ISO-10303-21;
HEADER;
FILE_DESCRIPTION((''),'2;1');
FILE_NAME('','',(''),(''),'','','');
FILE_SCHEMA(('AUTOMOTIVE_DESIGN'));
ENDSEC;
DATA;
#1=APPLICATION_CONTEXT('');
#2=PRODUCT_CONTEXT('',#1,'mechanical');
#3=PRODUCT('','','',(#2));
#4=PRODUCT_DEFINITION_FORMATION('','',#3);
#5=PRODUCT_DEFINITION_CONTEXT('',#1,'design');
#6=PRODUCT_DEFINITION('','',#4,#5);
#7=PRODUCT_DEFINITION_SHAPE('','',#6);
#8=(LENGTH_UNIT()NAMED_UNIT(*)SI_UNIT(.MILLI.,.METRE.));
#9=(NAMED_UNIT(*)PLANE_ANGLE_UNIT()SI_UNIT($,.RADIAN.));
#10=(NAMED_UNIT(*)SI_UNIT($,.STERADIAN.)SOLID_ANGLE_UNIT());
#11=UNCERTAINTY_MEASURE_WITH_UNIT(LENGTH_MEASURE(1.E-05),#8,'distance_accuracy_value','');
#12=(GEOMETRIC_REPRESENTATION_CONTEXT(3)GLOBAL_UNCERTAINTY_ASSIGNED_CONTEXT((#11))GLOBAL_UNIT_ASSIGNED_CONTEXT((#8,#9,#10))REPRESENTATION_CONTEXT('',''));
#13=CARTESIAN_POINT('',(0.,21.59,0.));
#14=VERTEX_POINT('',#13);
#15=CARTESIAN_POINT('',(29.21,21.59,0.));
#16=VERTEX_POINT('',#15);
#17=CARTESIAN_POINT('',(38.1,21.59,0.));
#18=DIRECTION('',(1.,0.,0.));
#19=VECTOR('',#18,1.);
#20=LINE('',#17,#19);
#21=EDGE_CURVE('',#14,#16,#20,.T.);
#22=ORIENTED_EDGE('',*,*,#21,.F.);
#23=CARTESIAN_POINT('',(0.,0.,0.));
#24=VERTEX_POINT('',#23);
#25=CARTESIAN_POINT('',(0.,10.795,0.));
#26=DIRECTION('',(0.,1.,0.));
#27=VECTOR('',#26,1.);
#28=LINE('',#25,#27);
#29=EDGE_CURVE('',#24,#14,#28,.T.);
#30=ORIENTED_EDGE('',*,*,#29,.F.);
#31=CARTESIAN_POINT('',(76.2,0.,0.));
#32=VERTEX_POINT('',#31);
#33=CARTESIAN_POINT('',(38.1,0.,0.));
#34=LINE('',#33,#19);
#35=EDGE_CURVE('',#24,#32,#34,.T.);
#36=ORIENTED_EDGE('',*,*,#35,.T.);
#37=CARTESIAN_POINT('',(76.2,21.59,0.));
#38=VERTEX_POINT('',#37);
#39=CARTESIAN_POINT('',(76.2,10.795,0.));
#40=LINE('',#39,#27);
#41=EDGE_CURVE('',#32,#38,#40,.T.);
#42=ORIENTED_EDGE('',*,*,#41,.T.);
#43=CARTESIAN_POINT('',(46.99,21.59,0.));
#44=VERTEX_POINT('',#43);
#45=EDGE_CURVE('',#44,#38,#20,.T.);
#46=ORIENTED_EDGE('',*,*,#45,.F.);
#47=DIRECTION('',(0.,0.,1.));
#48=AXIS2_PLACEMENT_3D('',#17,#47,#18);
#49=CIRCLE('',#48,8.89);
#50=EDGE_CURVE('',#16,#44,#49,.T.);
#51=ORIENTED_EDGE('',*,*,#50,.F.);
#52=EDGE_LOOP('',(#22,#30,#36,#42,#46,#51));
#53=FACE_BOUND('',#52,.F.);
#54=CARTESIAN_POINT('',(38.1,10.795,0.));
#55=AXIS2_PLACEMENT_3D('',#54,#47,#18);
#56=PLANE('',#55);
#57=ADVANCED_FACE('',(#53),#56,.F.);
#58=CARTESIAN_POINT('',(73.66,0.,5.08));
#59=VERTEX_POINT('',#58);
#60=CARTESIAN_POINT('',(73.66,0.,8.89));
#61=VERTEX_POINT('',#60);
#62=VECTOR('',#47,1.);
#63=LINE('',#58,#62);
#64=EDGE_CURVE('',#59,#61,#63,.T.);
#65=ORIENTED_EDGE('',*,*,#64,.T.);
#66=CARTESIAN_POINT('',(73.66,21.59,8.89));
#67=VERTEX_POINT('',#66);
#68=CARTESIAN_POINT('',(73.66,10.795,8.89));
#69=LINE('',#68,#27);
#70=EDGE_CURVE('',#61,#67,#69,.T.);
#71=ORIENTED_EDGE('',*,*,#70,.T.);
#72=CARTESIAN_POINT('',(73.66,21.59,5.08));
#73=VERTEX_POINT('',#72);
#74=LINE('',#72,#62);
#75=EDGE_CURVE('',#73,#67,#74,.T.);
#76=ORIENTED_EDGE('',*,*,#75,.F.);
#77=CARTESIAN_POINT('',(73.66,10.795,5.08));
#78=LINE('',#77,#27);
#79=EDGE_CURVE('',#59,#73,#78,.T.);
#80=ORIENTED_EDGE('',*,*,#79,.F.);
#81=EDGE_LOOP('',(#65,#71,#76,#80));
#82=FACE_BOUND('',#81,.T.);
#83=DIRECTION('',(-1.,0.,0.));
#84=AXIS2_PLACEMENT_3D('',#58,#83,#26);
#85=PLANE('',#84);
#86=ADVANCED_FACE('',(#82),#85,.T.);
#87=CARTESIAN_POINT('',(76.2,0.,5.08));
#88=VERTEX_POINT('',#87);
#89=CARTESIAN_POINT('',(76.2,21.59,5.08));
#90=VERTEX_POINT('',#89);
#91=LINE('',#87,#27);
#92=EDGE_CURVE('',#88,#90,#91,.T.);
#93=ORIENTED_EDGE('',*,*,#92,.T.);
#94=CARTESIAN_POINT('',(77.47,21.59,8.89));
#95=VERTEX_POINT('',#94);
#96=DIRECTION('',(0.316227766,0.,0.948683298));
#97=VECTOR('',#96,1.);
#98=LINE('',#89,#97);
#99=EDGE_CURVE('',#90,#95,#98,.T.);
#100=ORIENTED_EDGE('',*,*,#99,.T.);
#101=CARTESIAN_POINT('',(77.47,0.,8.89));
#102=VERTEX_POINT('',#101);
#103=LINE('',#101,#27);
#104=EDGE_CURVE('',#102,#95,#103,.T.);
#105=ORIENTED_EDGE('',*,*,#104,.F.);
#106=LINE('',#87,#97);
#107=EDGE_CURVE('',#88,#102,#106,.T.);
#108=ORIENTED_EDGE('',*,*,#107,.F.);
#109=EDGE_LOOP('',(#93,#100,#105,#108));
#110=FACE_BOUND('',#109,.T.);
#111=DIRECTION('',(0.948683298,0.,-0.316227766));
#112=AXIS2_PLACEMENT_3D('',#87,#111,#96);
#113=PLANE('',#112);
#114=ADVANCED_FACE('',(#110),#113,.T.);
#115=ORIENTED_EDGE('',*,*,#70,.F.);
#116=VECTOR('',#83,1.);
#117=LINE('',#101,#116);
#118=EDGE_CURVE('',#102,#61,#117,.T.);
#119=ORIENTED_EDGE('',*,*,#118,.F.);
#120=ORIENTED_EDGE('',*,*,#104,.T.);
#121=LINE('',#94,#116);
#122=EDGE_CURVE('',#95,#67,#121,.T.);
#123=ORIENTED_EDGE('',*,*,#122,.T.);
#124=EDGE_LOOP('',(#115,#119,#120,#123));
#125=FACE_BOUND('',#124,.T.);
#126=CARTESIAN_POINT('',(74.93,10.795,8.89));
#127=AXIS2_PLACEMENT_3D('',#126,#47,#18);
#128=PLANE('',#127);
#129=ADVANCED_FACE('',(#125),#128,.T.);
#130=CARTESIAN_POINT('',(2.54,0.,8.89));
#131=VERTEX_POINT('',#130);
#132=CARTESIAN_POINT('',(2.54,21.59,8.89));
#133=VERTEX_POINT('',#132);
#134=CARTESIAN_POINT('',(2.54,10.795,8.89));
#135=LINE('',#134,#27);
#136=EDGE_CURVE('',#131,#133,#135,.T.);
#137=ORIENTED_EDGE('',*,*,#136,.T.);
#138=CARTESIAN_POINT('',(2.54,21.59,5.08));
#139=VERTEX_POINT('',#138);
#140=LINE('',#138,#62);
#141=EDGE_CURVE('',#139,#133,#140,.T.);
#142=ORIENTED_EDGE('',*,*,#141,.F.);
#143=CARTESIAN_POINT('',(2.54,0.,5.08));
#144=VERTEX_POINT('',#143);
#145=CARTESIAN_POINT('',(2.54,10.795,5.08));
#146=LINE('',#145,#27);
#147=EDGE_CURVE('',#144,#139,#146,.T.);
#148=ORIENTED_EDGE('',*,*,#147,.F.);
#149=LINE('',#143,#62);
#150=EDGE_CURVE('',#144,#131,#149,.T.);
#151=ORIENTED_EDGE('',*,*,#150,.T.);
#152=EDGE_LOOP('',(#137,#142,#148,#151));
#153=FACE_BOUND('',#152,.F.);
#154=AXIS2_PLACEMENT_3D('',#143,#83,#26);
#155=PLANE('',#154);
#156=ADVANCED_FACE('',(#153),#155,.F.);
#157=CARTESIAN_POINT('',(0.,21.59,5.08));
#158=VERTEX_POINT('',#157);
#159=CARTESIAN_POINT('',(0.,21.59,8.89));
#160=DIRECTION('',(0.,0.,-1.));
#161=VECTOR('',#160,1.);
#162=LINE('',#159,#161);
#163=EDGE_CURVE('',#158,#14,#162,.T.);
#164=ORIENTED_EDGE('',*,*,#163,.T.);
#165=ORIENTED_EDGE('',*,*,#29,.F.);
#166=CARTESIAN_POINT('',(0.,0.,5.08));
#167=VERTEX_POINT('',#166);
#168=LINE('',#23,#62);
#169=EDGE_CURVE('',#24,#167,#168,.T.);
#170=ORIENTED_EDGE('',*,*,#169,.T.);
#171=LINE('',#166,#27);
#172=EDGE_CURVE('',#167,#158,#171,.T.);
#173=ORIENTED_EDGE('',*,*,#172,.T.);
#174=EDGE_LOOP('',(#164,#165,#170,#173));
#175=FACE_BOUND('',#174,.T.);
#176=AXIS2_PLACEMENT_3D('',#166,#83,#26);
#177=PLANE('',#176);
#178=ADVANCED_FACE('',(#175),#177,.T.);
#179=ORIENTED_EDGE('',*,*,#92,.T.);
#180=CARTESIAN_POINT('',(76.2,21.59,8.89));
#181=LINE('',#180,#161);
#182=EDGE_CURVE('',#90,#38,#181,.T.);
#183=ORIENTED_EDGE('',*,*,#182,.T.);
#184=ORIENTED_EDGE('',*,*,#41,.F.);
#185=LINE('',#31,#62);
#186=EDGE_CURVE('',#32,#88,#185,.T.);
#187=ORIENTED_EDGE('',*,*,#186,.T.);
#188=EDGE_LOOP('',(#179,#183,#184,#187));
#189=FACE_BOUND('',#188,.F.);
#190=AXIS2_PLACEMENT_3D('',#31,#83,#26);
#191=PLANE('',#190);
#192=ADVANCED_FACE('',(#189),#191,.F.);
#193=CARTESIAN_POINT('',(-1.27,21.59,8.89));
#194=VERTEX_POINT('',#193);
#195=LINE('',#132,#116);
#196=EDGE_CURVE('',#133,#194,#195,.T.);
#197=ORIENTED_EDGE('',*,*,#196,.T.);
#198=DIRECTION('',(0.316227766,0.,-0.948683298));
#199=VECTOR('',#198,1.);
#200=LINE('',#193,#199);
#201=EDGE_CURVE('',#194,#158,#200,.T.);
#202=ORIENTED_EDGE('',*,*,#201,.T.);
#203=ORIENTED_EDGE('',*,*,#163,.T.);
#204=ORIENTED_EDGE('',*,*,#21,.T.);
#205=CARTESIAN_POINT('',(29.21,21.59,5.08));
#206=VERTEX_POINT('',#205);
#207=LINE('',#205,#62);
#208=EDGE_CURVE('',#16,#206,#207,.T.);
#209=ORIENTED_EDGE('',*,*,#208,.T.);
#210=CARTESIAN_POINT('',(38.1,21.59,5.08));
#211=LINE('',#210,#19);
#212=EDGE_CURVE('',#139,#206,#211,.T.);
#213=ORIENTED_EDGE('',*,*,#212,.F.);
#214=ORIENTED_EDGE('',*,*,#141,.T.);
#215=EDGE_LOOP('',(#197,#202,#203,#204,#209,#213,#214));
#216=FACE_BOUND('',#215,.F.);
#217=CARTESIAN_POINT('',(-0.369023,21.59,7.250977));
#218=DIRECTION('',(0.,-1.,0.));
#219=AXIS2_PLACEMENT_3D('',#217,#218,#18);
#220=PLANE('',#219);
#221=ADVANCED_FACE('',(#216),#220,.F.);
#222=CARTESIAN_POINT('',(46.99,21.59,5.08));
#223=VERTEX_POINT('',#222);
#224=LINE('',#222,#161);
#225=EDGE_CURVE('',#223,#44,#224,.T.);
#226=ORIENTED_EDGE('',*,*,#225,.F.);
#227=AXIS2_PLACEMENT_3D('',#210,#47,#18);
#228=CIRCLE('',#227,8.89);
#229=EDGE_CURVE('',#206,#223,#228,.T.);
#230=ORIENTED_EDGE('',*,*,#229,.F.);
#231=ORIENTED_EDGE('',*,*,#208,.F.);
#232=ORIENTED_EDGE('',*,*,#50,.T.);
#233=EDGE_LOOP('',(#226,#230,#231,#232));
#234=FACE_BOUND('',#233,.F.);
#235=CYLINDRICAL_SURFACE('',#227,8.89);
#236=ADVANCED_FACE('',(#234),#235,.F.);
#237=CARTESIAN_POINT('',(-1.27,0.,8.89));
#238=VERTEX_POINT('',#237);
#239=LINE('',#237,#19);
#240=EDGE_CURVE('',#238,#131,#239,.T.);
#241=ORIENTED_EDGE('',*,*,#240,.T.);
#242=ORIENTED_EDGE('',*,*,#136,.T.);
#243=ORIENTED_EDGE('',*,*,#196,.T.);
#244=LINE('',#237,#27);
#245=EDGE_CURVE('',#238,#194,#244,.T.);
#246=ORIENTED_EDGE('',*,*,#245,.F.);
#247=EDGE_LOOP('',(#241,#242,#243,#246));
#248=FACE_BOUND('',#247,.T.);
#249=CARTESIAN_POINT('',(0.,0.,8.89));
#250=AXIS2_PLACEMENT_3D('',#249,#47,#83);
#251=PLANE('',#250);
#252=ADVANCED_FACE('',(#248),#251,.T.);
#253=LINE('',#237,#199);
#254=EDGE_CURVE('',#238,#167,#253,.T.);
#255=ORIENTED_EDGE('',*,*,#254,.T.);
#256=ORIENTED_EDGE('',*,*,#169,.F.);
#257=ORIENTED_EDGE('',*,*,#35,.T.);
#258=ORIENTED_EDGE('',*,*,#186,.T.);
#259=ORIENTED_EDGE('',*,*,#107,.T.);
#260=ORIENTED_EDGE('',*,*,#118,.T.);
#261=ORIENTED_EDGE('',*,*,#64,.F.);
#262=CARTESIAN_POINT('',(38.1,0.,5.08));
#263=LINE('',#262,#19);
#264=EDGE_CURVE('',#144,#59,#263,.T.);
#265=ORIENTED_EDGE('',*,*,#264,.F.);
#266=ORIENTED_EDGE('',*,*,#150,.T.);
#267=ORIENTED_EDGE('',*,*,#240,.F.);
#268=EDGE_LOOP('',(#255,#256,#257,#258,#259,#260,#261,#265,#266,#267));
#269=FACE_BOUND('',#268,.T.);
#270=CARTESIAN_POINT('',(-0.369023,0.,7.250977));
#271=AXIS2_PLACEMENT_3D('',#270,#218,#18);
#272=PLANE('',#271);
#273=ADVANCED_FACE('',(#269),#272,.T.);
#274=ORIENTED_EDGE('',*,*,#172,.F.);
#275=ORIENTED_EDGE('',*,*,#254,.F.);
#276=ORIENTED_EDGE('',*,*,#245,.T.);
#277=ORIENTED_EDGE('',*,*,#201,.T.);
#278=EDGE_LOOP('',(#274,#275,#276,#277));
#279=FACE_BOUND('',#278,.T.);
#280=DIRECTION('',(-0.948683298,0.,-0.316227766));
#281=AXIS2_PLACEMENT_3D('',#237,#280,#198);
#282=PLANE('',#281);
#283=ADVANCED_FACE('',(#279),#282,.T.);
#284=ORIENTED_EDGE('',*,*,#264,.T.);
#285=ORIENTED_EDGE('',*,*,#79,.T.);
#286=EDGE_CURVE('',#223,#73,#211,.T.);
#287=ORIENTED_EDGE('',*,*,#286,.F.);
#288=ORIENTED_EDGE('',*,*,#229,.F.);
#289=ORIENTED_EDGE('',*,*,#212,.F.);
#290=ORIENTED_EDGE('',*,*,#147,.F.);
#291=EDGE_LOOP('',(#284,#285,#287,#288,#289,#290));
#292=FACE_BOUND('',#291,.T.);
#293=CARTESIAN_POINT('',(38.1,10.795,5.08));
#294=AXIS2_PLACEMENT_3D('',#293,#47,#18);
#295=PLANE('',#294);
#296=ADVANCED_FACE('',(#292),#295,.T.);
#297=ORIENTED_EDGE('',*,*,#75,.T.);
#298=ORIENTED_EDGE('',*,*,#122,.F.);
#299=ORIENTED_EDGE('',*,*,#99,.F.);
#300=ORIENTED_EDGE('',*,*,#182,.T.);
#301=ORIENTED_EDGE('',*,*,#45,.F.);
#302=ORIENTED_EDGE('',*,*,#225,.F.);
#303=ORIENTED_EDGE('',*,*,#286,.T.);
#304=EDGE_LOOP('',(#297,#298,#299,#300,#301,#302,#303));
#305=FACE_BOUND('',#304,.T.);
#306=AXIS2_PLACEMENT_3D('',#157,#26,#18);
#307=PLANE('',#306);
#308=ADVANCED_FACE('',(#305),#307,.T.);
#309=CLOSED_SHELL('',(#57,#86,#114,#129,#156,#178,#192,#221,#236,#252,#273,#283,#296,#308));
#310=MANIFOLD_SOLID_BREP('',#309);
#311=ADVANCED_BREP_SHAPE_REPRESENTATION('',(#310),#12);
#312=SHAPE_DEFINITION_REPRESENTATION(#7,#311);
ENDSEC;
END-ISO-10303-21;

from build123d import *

# Parameters (mm, degrees)
F0_W     = 76.2
F0_H     = 21.59
F1_DEPTH = 5.08
F2_W     = 2.54
F2_H     = 21.59
F3_DEPTH = 3.81
F5_DEPTH = 25.4
F7_DEPTH = 21.59


# Not quite as in the source:
# - a feature names something its author has since deleted; it is built from what else it names


with BuildPart() as f1:
    # F0 (on Top) → F1 (new body)
    with BuildSketch(Plane.XY):
        with Locations((38.1, 10.795)):
            Rectangle(F0_W, F0_H)
    extrude(amount=F1_DEPTH)

    # F2 (on face) → F3 (join)
    with BuildSketch(Plane.XY.offset(5.08)):
        with Locations((1.27, 10.795)):
            Rectangle(F2_W, F2_H)
        with Locations((74.93, 10.795)):
            Rectangle(F2_W, F2_H)
    extrude(amount=F3_DEPTH)

    # F4 (on face) → F5 (cut)
    with BuildSketch(Plane.XY.offset(5.08)):
        with BuildLine():
            ThreePointArc((29.21, 21.59), (38.1, 12.7), (46.99, 21.59))
            Line((46.99, 21.59), (29.21, 21.59))
        make_face()
        with BuildLine():
            Line((29.21, 21.59), (46.99, 21.59))
            ThreePointArc((46.99, 21.59), (38.1, 30.48), (29.21, 21.59))
        make_face()
    extrude(amount=-F5_DEPTH, mode=Mode.SUBTRACT)

    # F6 (on face) → F7 (join, through all)
    with BuildSketch(Plane.XZ):
        Polygon((0, 5.08), (0, 8.89), (-1.27, 8.89), align=None)
        Polygon((76.2, 8.89), (76.2, 5.08), (77.47, 8.89), align=None)
    extrude(amount=-F7_DEPTH)


solid = f1.part
